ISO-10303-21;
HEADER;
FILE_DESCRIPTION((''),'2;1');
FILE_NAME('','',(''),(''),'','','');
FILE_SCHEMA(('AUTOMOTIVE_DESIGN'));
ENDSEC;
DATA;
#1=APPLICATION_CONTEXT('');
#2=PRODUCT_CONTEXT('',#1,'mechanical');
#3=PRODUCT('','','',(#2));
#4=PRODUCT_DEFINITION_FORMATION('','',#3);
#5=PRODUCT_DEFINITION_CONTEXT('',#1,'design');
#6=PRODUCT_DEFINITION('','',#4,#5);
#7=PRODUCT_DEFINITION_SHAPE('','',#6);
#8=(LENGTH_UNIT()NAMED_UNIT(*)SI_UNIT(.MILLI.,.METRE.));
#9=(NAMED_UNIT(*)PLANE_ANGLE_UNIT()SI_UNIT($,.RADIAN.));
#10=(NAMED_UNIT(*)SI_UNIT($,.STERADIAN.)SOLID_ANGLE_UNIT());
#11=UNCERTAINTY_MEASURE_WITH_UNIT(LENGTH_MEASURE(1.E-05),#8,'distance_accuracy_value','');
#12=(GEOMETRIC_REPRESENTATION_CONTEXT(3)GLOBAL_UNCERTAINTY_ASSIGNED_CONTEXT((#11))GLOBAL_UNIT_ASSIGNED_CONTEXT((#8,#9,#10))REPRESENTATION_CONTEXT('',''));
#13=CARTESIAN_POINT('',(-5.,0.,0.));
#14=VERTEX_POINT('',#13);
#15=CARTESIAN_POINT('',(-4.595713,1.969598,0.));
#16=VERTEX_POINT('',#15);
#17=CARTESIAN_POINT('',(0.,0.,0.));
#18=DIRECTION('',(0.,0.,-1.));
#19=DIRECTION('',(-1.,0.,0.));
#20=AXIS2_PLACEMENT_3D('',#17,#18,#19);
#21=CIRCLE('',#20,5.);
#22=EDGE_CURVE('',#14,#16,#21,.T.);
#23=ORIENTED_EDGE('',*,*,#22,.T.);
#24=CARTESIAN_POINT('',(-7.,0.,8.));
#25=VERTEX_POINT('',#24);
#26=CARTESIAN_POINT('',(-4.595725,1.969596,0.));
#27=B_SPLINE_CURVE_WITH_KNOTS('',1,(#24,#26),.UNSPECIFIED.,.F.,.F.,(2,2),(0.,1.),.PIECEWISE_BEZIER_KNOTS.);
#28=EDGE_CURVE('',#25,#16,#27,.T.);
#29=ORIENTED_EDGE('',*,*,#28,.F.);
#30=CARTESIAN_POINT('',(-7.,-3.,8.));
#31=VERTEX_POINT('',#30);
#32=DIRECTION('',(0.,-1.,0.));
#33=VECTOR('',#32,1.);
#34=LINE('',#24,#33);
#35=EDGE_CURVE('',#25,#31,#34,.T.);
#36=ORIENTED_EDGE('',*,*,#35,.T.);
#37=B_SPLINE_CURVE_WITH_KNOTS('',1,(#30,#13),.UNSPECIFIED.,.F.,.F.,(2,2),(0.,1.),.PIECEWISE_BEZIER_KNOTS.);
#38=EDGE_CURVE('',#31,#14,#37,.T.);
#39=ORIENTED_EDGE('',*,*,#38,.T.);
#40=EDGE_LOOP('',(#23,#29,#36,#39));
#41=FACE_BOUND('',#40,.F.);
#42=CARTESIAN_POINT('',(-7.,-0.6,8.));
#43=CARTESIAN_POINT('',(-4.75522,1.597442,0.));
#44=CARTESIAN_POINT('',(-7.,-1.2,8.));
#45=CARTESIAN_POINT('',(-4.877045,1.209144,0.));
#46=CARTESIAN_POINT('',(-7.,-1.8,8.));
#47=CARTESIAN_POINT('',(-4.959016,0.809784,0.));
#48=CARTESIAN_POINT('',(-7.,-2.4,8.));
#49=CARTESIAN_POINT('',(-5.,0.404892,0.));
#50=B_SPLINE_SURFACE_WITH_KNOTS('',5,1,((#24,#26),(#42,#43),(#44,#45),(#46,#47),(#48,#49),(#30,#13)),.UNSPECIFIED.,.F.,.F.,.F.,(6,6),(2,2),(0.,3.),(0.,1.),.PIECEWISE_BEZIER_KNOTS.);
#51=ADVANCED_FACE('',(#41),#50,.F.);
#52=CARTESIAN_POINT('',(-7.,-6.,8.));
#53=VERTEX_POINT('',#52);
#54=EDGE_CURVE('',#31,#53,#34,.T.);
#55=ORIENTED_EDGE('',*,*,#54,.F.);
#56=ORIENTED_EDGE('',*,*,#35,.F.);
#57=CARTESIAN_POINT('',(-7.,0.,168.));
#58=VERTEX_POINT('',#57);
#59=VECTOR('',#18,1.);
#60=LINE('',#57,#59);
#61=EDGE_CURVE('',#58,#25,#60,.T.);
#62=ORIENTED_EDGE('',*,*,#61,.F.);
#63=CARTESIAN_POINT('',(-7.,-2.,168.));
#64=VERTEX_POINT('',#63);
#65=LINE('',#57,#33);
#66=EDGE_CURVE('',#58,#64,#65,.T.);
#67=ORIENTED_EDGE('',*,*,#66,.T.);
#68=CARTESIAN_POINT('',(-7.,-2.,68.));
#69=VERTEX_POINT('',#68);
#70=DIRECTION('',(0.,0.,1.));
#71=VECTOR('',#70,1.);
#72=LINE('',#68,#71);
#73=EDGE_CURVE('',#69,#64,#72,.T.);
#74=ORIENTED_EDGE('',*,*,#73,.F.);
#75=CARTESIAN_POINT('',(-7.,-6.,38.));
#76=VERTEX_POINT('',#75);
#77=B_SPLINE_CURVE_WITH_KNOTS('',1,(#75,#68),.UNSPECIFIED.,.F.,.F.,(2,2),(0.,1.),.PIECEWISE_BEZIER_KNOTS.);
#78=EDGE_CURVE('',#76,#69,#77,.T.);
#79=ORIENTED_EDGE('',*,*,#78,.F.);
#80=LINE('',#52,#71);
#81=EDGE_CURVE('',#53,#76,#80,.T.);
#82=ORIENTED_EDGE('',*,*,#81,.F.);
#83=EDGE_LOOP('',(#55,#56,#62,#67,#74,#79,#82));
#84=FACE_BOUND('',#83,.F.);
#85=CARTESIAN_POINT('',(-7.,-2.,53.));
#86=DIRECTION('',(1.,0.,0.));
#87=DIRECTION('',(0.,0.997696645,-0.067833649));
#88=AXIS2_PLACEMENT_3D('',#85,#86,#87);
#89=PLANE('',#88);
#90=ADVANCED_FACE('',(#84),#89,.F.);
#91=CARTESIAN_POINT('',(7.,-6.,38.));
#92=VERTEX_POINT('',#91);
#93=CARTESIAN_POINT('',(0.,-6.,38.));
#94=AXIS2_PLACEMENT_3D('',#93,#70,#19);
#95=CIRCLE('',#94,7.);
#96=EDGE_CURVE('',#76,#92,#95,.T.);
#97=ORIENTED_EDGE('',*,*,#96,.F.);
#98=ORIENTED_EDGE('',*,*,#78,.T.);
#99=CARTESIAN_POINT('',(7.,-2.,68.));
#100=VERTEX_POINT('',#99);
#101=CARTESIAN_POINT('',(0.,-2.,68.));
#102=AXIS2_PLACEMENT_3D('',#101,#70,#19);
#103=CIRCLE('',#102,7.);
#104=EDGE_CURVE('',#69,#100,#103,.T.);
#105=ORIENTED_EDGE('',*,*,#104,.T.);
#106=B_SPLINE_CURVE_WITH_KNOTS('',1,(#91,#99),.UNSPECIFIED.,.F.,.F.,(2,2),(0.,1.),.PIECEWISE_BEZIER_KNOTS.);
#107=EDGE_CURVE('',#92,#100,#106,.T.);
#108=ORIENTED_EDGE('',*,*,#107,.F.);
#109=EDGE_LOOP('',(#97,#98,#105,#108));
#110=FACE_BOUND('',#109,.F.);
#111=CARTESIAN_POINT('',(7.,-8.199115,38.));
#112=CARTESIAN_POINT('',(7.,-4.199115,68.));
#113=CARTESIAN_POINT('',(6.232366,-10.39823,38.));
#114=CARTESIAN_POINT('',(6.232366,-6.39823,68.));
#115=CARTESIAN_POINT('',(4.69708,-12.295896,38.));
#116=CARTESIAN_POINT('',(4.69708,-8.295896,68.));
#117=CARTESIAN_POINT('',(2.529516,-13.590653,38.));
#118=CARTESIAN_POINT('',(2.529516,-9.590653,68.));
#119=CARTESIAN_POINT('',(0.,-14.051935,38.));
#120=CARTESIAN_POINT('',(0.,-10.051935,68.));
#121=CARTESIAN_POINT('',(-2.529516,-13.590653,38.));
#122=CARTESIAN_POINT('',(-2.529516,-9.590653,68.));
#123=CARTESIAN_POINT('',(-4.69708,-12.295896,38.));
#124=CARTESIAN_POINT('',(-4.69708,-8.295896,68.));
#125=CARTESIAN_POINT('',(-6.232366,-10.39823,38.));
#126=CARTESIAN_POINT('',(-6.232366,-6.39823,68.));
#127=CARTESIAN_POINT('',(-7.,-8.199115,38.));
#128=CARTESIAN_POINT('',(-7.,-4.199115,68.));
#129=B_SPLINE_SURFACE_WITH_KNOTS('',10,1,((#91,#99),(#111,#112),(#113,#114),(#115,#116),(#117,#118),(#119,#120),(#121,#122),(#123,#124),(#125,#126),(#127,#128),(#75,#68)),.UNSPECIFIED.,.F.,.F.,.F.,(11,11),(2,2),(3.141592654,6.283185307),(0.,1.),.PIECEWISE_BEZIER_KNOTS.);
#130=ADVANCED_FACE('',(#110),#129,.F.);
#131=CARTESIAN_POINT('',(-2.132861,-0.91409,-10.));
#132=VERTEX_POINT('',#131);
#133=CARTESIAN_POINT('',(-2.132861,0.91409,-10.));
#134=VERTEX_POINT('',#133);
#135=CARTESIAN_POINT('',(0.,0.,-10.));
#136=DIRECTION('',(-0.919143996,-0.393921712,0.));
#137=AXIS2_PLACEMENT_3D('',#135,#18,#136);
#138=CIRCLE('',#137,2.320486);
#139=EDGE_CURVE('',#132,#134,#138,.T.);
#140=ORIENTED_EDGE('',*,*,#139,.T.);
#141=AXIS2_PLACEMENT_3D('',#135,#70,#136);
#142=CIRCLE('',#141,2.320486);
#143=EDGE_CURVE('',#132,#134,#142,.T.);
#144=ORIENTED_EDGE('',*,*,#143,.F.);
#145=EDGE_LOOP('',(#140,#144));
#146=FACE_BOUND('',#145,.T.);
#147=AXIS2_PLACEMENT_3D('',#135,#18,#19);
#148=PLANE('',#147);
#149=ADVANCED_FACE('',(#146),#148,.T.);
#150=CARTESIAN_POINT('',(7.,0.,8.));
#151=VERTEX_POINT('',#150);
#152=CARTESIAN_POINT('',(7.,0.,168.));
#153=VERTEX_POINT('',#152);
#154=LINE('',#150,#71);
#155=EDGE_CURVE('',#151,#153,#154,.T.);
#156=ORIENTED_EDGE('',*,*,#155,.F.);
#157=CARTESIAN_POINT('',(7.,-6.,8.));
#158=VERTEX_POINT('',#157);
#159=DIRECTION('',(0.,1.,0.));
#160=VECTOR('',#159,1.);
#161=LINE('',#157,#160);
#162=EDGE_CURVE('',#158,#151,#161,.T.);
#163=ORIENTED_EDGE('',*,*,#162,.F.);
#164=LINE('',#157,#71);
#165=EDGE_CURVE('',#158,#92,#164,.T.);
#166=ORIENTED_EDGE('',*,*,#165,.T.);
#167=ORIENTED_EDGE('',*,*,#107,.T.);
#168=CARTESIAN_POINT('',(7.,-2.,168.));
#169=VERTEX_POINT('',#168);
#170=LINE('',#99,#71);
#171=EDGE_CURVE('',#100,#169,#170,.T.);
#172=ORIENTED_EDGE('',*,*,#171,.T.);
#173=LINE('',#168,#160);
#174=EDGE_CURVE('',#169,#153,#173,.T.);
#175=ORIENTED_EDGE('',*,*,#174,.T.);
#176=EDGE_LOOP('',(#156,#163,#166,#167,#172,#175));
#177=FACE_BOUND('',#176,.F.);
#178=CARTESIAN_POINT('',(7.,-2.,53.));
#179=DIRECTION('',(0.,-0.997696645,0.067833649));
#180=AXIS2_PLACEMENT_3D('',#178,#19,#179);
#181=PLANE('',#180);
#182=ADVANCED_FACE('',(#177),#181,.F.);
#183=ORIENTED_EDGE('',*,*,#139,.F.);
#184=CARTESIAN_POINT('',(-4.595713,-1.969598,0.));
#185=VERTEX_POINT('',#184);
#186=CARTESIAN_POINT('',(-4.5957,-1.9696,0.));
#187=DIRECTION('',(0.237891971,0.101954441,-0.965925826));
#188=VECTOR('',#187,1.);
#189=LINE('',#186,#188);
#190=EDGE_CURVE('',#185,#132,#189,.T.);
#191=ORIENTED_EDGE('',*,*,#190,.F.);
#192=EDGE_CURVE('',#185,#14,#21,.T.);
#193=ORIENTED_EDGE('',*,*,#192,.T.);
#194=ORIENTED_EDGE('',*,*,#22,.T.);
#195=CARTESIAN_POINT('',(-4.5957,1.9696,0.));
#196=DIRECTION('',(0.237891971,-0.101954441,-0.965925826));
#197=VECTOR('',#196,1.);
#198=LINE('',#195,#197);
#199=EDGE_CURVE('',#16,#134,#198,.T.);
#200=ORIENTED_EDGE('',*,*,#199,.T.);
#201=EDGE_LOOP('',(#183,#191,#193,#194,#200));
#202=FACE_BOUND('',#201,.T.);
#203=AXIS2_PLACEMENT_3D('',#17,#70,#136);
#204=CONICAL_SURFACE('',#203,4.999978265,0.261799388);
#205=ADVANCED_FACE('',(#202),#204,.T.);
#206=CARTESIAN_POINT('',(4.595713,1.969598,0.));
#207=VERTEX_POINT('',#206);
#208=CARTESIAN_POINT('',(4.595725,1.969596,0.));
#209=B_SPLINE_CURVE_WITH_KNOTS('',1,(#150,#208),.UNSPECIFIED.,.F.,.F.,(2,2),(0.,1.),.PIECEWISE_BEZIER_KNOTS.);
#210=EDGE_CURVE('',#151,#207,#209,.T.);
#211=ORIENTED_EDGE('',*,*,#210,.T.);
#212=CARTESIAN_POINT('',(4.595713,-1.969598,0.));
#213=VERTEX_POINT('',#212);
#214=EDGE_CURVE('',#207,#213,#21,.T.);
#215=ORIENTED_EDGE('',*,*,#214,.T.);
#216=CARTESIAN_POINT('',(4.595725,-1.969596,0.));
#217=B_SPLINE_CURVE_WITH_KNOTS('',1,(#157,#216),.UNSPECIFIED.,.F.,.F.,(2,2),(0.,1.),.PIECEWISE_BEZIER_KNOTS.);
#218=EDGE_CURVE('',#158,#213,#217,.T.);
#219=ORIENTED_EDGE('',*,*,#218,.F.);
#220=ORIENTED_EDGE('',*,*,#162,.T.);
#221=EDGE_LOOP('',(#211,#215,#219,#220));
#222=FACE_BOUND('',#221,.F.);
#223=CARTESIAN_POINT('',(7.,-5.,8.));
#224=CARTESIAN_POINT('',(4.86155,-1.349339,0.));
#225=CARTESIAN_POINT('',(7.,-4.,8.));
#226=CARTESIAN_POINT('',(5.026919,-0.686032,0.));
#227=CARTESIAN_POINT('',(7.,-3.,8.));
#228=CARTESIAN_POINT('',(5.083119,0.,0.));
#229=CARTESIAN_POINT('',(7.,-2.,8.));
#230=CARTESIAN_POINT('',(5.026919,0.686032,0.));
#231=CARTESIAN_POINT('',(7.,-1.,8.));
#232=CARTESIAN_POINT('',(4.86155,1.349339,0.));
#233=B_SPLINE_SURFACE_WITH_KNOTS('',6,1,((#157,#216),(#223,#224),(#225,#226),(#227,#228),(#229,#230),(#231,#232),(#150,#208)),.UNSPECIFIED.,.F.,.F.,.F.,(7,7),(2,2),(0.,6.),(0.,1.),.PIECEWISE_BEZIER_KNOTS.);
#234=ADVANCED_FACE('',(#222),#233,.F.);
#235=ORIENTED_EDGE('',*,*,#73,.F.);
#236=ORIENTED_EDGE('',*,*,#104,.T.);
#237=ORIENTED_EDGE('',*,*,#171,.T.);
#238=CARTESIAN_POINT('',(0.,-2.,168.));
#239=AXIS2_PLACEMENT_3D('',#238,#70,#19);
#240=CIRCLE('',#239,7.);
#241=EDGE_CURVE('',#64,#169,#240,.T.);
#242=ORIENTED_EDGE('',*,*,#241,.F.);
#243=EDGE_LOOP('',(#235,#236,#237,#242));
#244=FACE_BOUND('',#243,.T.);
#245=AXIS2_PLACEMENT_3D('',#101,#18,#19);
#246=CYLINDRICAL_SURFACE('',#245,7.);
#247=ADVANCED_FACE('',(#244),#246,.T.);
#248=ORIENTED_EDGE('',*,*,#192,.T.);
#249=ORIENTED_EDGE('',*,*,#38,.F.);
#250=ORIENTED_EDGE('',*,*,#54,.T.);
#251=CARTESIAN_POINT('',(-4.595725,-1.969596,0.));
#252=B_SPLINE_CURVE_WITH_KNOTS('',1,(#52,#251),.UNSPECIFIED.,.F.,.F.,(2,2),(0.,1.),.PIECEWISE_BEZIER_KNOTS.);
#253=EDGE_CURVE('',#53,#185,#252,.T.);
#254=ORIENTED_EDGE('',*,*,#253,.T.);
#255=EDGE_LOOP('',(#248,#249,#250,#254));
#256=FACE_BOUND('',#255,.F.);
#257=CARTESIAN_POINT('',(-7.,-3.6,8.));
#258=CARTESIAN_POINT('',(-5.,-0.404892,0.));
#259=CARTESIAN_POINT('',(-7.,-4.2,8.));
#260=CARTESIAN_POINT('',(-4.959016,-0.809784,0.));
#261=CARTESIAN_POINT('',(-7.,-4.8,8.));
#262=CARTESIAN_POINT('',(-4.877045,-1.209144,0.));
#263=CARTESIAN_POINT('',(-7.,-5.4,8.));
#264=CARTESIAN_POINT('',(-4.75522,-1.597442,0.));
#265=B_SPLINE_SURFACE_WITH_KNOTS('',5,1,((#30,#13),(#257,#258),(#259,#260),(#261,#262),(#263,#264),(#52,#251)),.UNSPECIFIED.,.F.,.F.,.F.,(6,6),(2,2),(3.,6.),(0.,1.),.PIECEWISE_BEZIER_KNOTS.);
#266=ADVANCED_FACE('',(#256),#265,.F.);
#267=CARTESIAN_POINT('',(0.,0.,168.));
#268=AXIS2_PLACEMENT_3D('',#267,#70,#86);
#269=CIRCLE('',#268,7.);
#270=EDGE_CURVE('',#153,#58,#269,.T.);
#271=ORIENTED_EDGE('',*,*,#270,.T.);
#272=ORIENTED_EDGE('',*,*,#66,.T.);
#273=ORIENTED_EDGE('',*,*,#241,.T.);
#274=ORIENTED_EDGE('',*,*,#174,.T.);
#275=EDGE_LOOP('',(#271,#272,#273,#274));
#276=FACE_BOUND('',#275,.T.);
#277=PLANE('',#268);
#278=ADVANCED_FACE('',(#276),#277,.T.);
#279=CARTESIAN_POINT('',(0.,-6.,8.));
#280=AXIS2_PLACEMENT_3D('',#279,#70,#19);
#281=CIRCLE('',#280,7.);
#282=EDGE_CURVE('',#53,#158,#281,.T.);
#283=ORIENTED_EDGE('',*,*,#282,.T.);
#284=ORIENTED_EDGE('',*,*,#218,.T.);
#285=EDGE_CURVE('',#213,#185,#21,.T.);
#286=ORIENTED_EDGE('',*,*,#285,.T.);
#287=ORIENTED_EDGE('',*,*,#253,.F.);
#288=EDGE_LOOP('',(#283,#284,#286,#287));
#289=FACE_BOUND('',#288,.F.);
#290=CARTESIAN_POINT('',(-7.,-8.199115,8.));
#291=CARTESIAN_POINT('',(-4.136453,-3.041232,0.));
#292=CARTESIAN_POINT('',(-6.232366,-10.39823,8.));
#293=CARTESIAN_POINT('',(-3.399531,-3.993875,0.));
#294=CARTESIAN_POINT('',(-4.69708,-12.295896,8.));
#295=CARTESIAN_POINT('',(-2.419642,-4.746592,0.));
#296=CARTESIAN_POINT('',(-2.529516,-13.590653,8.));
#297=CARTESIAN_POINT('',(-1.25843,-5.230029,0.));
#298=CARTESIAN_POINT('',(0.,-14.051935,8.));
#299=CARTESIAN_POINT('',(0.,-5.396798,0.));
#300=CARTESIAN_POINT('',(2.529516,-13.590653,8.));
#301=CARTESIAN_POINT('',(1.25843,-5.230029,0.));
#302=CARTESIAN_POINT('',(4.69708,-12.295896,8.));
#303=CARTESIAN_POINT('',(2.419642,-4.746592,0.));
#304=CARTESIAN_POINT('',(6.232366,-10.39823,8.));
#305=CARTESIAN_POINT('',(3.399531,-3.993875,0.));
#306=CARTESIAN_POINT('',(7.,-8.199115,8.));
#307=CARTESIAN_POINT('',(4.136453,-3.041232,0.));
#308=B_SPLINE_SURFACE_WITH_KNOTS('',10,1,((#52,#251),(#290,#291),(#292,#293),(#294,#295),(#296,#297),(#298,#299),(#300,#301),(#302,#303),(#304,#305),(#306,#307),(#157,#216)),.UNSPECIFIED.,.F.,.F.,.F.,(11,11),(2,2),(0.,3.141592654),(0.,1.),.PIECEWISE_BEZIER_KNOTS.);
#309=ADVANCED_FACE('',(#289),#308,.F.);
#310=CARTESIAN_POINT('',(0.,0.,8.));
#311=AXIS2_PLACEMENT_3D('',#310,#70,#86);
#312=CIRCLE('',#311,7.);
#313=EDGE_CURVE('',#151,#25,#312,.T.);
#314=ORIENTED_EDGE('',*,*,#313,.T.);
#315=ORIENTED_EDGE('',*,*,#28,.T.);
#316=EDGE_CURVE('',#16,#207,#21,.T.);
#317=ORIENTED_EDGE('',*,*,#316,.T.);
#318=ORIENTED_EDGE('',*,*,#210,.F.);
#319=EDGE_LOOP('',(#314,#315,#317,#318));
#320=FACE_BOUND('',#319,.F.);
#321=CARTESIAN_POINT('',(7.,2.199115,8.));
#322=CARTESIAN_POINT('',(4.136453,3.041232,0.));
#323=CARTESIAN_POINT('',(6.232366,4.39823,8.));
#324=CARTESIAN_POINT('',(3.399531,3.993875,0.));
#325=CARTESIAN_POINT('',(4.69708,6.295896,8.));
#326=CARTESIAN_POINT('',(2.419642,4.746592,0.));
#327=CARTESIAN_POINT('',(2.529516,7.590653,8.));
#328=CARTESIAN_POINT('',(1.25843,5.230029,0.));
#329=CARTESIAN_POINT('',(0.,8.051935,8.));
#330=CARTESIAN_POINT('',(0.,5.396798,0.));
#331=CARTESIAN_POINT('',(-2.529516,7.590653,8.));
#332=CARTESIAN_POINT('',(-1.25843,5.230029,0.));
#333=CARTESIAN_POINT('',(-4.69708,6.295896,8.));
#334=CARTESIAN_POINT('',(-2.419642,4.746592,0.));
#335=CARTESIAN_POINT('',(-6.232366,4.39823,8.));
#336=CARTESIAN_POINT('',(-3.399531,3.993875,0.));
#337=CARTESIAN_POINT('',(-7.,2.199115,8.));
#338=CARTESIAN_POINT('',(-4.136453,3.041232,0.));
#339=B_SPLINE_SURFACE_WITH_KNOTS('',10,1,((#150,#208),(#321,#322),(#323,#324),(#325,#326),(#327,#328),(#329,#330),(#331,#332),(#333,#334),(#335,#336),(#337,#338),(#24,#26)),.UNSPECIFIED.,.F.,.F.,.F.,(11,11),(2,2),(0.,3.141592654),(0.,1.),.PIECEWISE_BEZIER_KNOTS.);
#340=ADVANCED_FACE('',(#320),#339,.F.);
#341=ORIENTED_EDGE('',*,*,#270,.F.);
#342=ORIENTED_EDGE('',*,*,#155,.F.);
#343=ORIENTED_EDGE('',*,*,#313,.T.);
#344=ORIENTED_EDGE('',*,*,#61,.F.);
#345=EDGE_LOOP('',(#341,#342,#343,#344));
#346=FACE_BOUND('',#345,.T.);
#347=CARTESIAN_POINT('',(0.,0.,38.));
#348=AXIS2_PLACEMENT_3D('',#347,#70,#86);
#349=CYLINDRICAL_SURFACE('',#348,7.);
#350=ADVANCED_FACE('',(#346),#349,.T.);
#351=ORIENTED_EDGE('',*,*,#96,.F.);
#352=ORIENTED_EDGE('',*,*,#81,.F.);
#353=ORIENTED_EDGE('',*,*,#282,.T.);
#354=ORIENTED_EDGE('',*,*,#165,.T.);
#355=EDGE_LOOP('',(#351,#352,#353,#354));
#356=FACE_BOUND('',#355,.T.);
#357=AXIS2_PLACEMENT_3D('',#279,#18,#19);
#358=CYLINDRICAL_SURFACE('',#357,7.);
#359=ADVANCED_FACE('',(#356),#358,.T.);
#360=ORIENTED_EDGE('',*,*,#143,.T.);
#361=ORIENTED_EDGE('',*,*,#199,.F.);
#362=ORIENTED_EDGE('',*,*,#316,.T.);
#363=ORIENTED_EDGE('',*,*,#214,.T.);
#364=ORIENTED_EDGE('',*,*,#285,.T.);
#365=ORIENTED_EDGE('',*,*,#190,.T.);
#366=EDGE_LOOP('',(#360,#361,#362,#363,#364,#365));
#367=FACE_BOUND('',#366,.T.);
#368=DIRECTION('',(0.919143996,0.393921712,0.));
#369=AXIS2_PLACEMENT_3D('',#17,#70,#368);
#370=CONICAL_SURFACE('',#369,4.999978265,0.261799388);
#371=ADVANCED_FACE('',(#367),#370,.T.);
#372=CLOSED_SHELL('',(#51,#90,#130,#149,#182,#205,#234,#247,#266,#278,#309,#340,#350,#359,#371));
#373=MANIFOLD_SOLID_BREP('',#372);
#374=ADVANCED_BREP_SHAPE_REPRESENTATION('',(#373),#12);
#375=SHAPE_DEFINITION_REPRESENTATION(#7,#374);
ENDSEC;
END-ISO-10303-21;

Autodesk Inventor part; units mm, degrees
ref_plane "YZ Plane" through (0, 0, 0) normal (1, 0, 0) x (0, 1, 0)
ref_plane "XZ Plane" through (0, 0, 0) normal (0, 1, 0) x (-1, 0, 0)
sketch "Sketch4" plane through (0, 0, 0) normal (0, 0, -1) x (-1, 0, 0)
  circle A0 centre (0, 0) radius 5
  dimension "d17" = 10
ref_plane "Work Plane3" through (0, 0, 8) normal (0, 0, 1) x (1, 0, 0)
sketch "Sketch1" plane through (0, 0, 8) normal (0, 0, 1) x (1, 0, 0)
  line L0 (0, 0) -> (0, -6) construction
  line L1 (-7, 0) -> (-7, -6)
  line L2 (7, -6) -> (7, 0)
  arc A0 (7, 0) -> (-7, 0) centre (0, 0) ccw
  arc A1 (-7, -6) -> (7, -6) centre (0, -6) ccw
  point P0 (0, -3)
  dimension "d0" = 6
  dimension "d1" = 14
extrude "Extrusion1" add sketch "Sketch1" along normal blind 30
ref_plane "Work Plane1" through (0, 0, 68) normal (0, 0, 1) x (1, 0, 0)
ref_plane "Work Plane2" through (0, 0, 168) normal (0, 0, 1) x (1, 0, 0)
sketch "Sketch2" plane through (0, 0, 68) normal (0, 0, 1) x (1, 0, 0)
  line L0 (0, 0) -> (0, -2) construction
  line L1 (-7, 0) -> (-7, -2)
  line L2 (7, -2) -> (7, 0)
  arc A0 (7, 0) -> (-7, 0) centre (0, 0) ccw
  arc A1 (-7, -2) -> (7, -2) centre (0, -2) ccw
  point P0 (0, -1)
  dimension "d4" = 2
extrude "Extrusion2" add sketch "Sketch2" along normal up to surface (100 mm away)
loft "Loft1" add section 1 edges at (0, -13, 38) (7, -3, 38) (0, 7, 38) (-7, -3, 38) section 2 edges at (0, -9, 68) (-7, -1, 68) (0, 7, 68) (7, -1, 68)
ref_plane "Work Plane4" through (0, 0, 38) normal (0, 0, 1) x (1, 0, 0)
loft "Loft2" add profiles "Sketch4" section 1 edges at (0, -13, 8) (-7, -3, 8) (0, 7, 8) (7, -3, 8)
sketch "Sketch5" plane through (0, 0, 0) normal (0, 0, -1) x (-1, 0, 0)
  arc A0 (-4.5957, -1.9696) -> (4.5957, -1.9696) centre (0, 0) ccw projected
  arc A1 (4.5957, -1.9696) -> (4.5957, 1.9696) centre (0, 0) ccw projected
  arc A2 (4.5957, 1.9696) -> (-4.5957, 1.9696) centre (0, 0) ccw projected
  arc A3 (-4.5957, 1.9696) -> (-4.5957, -1.9696) centre (0, 0) ccw projected
extrude "Extrusion4" add sketch "Sketch5" along normal blind 10 draft -15
properties part number "Form_test"
